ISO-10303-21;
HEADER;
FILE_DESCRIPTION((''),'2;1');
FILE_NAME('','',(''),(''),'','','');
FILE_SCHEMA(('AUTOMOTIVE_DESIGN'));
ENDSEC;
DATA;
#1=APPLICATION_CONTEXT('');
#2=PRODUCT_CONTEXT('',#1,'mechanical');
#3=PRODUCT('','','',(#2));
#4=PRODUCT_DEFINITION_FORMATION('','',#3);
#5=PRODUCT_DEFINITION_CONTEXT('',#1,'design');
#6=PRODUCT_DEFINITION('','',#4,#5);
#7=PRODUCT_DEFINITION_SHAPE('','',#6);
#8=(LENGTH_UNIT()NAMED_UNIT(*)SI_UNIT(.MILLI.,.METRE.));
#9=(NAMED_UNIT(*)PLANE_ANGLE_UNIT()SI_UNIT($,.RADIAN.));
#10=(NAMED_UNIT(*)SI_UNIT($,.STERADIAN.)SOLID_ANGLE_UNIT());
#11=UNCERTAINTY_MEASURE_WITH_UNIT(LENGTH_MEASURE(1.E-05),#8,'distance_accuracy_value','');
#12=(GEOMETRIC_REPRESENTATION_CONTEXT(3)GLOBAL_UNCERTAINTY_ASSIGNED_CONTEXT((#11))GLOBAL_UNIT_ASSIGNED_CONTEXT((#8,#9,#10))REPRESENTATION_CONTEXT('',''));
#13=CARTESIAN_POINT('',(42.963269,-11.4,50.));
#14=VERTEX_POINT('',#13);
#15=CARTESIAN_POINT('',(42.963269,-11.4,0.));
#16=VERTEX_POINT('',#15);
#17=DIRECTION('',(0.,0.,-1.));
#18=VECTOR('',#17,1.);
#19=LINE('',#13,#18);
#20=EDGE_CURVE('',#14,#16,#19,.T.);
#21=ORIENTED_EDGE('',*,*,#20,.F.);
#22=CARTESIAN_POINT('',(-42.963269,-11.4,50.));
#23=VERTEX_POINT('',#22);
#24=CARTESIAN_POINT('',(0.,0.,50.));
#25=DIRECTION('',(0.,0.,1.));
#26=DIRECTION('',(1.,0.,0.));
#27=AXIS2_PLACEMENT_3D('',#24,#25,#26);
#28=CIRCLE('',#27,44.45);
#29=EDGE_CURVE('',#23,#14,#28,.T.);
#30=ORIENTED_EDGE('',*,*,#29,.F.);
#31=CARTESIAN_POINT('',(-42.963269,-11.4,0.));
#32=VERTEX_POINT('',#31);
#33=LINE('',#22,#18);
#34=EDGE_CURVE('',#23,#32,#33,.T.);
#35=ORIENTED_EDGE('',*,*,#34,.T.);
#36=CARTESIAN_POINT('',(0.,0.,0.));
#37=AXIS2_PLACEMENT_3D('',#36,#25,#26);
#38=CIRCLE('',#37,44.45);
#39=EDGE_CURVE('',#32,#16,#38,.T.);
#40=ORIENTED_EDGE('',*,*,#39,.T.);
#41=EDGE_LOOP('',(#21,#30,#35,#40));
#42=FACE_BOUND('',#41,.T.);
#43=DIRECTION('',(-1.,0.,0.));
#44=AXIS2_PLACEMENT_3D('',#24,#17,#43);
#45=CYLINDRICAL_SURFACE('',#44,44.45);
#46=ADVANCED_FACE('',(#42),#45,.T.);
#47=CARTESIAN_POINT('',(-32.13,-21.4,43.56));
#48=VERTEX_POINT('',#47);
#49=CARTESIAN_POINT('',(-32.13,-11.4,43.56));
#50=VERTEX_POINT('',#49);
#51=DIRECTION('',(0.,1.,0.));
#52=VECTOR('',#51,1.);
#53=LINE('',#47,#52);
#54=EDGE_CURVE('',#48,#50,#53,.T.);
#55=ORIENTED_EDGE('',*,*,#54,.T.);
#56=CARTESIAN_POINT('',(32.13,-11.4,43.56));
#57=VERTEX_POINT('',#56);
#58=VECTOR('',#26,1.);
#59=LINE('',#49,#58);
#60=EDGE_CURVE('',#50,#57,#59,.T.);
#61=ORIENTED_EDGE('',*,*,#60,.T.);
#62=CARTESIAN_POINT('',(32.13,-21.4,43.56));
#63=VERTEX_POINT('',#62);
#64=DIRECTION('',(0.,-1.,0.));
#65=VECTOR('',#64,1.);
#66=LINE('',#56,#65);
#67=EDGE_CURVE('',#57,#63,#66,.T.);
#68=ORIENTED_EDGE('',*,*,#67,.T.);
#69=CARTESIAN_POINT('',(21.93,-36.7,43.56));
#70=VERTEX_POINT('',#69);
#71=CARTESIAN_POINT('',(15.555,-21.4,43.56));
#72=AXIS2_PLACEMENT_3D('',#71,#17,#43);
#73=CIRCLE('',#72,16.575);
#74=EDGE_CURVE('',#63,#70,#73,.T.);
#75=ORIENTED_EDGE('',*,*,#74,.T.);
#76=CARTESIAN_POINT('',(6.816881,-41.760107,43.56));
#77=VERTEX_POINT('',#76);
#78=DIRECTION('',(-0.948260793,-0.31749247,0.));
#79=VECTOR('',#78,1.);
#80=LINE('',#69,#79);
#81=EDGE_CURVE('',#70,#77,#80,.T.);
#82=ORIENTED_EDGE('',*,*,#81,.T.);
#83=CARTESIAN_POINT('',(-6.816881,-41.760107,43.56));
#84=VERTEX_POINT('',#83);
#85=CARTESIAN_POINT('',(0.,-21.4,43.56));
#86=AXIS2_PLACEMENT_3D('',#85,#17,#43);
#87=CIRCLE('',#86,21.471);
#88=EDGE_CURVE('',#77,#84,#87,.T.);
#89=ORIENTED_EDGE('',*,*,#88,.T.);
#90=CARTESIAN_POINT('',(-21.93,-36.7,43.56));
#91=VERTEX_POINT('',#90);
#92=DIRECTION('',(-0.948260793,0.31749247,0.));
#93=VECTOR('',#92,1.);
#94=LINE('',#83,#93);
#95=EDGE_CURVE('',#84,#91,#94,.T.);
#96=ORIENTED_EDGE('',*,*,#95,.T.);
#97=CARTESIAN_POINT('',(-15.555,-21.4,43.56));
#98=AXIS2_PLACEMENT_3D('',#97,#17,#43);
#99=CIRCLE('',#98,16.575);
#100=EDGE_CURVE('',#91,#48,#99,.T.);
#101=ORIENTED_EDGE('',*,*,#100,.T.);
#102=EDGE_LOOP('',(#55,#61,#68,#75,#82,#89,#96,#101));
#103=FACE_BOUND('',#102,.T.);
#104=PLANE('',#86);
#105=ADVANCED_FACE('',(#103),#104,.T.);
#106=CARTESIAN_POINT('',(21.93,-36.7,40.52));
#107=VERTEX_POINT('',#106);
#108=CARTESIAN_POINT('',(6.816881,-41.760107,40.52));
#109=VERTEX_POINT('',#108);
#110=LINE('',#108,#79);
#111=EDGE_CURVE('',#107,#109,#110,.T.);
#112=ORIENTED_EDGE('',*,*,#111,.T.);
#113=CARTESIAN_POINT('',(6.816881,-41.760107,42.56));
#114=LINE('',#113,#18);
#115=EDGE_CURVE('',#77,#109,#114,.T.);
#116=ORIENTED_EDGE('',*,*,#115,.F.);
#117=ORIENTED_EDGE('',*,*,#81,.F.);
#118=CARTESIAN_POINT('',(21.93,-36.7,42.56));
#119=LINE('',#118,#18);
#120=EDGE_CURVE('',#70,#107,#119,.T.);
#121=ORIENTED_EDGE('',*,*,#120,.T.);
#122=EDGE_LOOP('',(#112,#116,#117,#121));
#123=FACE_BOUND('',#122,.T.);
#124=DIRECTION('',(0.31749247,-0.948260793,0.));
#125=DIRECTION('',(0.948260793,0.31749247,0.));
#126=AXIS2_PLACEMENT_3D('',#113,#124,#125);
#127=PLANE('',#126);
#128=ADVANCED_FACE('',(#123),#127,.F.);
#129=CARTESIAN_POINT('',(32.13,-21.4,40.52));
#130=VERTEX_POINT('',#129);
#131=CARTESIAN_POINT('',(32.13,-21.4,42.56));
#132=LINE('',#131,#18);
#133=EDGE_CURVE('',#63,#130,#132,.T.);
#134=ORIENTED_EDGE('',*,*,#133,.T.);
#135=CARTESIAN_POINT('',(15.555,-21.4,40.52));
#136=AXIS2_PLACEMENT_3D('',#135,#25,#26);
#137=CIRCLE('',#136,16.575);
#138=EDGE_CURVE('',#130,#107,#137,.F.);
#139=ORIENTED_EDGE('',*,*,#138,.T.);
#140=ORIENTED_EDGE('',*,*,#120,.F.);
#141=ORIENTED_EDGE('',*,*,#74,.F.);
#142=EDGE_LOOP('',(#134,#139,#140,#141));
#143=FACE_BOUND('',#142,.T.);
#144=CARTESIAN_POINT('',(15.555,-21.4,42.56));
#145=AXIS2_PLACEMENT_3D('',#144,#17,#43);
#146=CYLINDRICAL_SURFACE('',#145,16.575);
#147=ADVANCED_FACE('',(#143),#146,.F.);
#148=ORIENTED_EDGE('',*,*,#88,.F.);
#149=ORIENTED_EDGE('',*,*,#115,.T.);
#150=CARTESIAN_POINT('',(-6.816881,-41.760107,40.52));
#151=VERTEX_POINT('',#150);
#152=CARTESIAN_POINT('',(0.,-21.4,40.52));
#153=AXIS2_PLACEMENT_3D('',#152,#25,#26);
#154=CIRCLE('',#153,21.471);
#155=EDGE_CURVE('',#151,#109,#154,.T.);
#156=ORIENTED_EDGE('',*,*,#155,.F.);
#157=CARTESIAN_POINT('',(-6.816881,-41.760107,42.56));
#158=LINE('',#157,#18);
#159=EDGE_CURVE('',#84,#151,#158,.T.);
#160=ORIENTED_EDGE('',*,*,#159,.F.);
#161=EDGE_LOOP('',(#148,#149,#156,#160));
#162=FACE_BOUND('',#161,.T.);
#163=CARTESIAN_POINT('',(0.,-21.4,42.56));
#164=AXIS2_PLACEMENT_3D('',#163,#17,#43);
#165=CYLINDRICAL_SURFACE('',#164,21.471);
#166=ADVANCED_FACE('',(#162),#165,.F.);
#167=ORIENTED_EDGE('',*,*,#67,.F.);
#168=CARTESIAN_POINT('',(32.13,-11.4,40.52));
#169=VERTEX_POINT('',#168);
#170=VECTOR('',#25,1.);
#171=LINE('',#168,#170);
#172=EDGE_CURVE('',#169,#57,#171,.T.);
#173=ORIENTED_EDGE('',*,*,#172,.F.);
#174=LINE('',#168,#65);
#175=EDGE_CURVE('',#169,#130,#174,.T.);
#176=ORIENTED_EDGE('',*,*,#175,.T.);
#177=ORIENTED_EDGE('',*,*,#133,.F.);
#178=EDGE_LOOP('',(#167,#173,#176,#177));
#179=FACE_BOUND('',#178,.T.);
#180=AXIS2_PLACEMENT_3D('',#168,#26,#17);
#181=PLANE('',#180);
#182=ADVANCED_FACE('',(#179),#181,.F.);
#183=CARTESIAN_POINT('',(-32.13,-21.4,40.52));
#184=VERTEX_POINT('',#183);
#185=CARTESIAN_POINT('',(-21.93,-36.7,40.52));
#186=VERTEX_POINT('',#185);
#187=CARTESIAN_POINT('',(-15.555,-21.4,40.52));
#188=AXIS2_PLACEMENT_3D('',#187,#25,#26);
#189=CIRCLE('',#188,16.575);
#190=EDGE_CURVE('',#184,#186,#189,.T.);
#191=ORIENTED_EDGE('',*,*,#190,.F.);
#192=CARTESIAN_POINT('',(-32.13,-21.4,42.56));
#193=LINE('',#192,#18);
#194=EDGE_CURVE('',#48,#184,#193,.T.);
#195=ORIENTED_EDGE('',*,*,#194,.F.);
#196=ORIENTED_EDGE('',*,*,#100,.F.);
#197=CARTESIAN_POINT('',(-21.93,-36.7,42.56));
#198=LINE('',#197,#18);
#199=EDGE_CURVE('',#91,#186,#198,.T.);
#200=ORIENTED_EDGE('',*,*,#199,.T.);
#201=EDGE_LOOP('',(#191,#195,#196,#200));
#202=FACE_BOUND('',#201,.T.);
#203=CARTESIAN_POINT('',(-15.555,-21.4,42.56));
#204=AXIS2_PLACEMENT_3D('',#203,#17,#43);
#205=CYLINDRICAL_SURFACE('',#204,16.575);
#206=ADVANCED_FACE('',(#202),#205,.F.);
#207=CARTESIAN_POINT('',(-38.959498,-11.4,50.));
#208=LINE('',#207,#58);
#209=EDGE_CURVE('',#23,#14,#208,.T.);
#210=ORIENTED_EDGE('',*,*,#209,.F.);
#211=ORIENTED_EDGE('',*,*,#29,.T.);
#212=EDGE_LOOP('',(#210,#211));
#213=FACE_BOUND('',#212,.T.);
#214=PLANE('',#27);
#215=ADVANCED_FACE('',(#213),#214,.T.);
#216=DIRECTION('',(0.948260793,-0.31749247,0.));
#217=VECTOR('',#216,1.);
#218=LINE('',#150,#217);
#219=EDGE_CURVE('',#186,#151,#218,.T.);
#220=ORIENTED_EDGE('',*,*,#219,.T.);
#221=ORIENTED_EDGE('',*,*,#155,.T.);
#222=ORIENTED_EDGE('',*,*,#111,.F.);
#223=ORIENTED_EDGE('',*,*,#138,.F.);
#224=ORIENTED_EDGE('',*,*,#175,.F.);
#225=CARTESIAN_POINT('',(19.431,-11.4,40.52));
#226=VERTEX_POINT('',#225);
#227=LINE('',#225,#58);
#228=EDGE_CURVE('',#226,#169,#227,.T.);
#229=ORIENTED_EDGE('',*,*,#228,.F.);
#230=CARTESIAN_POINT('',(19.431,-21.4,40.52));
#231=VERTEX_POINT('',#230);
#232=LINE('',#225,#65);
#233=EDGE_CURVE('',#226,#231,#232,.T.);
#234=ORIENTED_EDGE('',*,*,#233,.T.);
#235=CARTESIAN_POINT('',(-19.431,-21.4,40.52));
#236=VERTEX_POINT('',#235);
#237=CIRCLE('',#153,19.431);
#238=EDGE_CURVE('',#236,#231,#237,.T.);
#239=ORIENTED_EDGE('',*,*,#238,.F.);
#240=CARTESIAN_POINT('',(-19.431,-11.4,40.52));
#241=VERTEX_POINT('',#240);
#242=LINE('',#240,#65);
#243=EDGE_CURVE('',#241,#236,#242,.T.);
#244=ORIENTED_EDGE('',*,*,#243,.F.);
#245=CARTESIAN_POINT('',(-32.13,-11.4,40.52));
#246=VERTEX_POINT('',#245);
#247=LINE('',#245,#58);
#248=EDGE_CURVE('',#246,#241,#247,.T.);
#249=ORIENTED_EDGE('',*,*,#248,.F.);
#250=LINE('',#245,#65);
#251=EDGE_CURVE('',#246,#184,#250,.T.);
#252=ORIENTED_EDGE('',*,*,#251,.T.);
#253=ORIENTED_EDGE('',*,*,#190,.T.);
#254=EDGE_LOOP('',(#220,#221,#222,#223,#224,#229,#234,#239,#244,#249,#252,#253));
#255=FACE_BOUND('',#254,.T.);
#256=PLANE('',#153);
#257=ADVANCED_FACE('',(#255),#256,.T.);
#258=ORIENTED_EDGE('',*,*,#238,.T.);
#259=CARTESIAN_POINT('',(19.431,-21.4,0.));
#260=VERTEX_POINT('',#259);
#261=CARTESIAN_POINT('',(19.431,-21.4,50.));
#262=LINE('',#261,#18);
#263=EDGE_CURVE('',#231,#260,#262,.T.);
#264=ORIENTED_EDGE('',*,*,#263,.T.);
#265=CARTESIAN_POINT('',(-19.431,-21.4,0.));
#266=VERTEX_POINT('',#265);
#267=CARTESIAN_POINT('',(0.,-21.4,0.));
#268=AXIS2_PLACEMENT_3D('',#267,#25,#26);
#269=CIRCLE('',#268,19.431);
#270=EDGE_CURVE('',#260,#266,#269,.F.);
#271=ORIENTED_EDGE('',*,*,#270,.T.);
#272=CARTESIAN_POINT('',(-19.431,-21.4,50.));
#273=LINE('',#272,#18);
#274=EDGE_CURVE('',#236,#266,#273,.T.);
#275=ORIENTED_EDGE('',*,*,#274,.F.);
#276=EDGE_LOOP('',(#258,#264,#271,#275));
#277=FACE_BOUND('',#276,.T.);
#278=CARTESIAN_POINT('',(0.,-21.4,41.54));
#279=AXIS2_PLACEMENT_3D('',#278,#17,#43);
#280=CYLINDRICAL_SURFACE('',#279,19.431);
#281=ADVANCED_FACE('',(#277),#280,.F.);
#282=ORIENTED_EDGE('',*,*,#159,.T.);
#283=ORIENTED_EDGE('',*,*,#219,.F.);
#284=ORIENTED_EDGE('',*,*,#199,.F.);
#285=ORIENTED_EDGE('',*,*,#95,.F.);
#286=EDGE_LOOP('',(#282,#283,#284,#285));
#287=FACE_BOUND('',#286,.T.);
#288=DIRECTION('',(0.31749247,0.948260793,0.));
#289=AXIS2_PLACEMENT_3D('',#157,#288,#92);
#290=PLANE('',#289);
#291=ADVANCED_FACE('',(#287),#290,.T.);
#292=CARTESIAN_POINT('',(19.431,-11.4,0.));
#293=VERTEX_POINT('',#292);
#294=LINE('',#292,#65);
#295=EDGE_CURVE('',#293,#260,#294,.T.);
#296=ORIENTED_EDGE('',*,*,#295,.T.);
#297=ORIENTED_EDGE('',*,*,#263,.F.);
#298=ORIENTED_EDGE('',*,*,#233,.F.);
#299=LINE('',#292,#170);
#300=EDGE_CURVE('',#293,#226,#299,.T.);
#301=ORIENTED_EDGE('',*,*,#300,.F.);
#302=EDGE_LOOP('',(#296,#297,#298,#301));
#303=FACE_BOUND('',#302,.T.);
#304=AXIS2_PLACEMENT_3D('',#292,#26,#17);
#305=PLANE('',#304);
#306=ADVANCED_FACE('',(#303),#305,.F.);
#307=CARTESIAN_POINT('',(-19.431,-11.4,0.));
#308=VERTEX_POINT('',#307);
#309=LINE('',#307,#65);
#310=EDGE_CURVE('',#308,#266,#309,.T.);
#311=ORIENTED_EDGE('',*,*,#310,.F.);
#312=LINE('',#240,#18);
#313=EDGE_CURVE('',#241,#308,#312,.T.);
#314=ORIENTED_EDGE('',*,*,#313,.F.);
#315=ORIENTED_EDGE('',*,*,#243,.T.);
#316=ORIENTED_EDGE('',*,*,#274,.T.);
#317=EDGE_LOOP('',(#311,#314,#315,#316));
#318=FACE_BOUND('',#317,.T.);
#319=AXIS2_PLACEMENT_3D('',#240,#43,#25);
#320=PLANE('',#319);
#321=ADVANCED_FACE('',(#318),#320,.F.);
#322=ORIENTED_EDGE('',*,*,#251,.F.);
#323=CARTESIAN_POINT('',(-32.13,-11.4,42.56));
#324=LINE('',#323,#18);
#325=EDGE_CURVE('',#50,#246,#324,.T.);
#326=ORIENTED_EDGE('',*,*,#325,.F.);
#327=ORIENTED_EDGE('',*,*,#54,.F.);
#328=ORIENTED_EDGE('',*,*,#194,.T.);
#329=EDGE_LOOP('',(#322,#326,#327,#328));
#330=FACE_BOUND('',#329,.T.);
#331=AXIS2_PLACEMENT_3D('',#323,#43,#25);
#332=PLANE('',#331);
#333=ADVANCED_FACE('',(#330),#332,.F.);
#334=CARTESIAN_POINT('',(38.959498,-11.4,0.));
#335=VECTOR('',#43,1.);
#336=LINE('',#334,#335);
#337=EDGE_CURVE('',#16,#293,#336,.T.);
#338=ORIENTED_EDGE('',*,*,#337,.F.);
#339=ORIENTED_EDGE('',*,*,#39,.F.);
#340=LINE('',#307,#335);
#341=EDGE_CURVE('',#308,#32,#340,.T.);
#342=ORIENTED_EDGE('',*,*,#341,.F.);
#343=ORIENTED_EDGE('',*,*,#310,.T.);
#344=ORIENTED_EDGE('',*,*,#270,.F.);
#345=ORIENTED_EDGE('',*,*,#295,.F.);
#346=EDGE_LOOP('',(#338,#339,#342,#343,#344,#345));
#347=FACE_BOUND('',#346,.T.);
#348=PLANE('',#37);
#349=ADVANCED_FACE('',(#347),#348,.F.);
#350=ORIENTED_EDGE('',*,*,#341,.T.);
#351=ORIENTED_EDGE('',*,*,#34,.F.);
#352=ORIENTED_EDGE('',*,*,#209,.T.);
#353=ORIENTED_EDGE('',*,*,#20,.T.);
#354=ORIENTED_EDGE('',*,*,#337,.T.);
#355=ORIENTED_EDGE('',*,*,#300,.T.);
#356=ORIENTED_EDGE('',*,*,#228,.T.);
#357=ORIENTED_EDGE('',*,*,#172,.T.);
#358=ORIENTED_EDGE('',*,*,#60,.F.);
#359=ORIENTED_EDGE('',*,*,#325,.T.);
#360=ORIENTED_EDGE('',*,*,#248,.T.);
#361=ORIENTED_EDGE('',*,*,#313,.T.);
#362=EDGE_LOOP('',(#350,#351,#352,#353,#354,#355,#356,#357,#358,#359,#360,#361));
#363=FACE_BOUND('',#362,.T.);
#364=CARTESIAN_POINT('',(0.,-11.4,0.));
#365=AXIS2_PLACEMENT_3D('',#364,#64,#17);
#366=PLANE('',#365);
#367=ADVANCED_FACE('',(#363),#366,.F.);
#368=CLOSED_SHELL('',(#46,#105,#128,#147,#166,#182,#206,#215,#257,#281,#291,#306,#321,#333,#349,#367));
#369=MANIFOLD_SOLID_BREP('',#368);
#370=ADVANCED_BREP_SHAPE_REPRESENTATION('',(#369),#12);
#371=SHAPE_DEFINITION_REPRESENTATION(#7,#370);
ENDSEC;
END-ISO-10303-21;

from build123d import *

# Parameters (mm, degrees)
BOSS_EXTRUDE1_DEPTH = 50
CAVITY1_DEPTH       = 42.56
CAVITY1_START       = 40.52
CAVITY1_2_DEPTH     = 2.04
CAVITY1_START_2     = 41.54
CAVITY1_3_DEPTH     = 1.02
CUT_EXTRUDE1_START  = -42.56
CUT_EXTRUDE1_DEPTH  = 42.56
CUT_EXTRUDE2_DEPTH  = 80.011407404
BOSS_EXTRUDE2_DEPTH = 10
CUT_EXTRUDE3_DEPTH  = 1
SKETCH7_W           = 6.44
SKETCH7_H           = 10
BOSS_EXTRUDE3_DEPTH = 38.862
BOSS_EXTRUDE4_DEPTH = 50


# Read off the part's stored shape, not the designer's step: Cavity1
with BuildPart() as part:
    # Sketch1 → Boss-Extrude1 (new body)
    with BuildSketch(Plane.XY):
        with BuildLine():
            Line((42.035699114, -14.45), (-42.035699114, -14.45))
            ThreePointArc((-42.035699114, -14.45), (0, -44.45), (42.035699114, -14.45))
        make_face()
    extrude(amount=BOSS_EXTRUDE1_DEPTH)

    # Cavity1 outline → Cavity1 (cut)
    with BuildSketch(Plane.XY):
        with BuildLine():
            ThreePointArc((-18.145557611, -14.45), (0, -40.831), (18.145557611, -14.45))
            Line((18.145557611, -14.45), (13.723350293, -14.45))
            ThreePointArc((13.723350293, -14.45), (0, -36.782875), (-13.723350293, -14.45))
            Line((-13.723350293, -14.45), (-18.145557611, -14.45))
        make_face()
    extrude(amount=CAVITY1_DEPTH, mode=Mode.SUBTRACT)

    # Cavity1 2 outline → Cavity1 2 (cut)
    with BuildSketch(Plane.XY.offset(CAVITY1_START)):
        with BuildLine():
            Line((30.602528867, -14.45), (18.145557611, -14.45))
            ThreePointArc((18.145557611, -14.45), (0, -40.831), (-18.145557611, -14.45))
            Line((-18.145557611, -14.45), (-30.602528867, -14.45))
            ThreePointArc((-30.602528867, -14.45), (-30.998341956, -27.419452985), (-21.93, -36.7))
            Line((-21.93, -36.7), (-6.816880824, -41.760107486))
            ThreePointArc((-6.816880824, -41.760107486), (0, -42.871), (6.816880824, -41.760107486))
            Line((6.816880824, -41.760107486), (21.93, -36.7))
            ThreePointArc((21.93, -36.7), (30.998341956, -27.419452985), (30.602528867, -14.45))
        make_face()
    extrude(amount=CAVITY1_2_DEPTH, mode=Mode.SUBTRACT)

    # Cavity1 3 outline → Cavity1 3 (cut)
    with BuildSketch(Plane.XY.offset(CAVITY1_START_2)):
        with BuildLine():
            ThreePointArc((-13.723350293, -14.45), (0, -36.782875), (13.723350293, -14.45))
            Line((13.723350293, -14.45), (7.578589464, -14.45))
            ThreePointArc((7.578589464, -14.45), (0, -31.682875), (-7.578589464, -14.45))
            Line((-7.578589464, -14.45), (-13.723350293, -14.45))
        make_face()
    extrude(amount=CAVITY1_3_DEPTH, mode=Mode.SUBTRACT)

    # Sketch2 → Cut-Extrude1 (cut)
    with BuildSketch(Plane(origin=(0, 0, 0), x_dir=(-1, 0, 0), z_dir=(0, 0, -1)).offset(CUT_EXTRUDE1_START)):
        with BuildLine():
            Line((13.723350293, -14.45), (-13.723350293, -14.45))
            ThreePointArc((-13.723350293, -14.45), (0, -36.782875), (13.723350293, -14.45))
        make_face()
    extrude(amount=CUT_EXTRUDE1_DEPTH, mode=Mode.SUBTRACT)

    # Sketch4 → Cut-Extrude2 (cut, through all)
    with BuildSketch(Plane(origin=(0, 0, 0), x_dir=(-1, 0, 0), z_dir=(0, 0, -1))):
        with BuildLine():
            ThreePointArc((-42.035699114, -14.45), (-40.646415857, -17.990869296), (-38.9594982, -21.4))
            Line((-38.9594982, -21.4), (-19.431, -21.4))
            ThreePointArc((-19.431, -21.4), (-19.106937103, -17.866062319), (-18.145557611, -14.45))
            Line((-18.145557611, -14.45), (-42.035699114, -14.45))
        make_face()
        with BuildLine():
            Line((19.431, -21.4), (38.9594982, -21.4))
            ThreePointArc((38.9594982, -21.4), (40.646415857, -17.990869296), (42.035699114, -14.45))
            Line((42.035699114, -14.45), (18.145557611, -14.45))
            ThreePointArc((18.145557611, -14.45), (19.106937103, -17.866062319), (19.431, -21.4))
        make_face()
    extrude(amount=-CUT_EXTRUDE2_DEPTH, mode=Mode.SUBTRACT)

    # Sketch5 → Boss-Extrude2 (add)
    with BuildSketch(Plane(origin=(0, -21.4, 0), x_dir=(1, 0, 0), z_dir=(0, 1, 0))):
        Polygon((-32.13, -42.56), (-32.13, -40.52), (-19.431, -40.52), (-19.431, 0), (-38.9594982, 0), (-38.9594982, -50), (-19.431, -50), (-19.431, -42.56), align=None)
        Polygon((19.431, -42.56), (19.431, -50), (38.9594982, -50), (38.9594982, 0), (19.431, 0), (19.431, -40.52), (32.13, -40.52), (32.13, -42.56), align=None)
    extrude(amount=BOSS_EXTRUDE2_DEPTH)

    # Sketch6 → Cut-Extrude3 (cut)
    with BuildSketch(Plane(origin=(0, 0, 42.56), x_dir=(-1, 0, 0), z_dir=(0, 0, -1))):
        with BuildLine():
            Line((-19.431, -21.4), (-19.431, -11.4))
            Line((-19.431, -11.4), (-32.13, -11.4))
            Line((-32.13, -11.4), (-32.13, -21.4))
            ThreePointArc((-32.13, -21.4), (-29.346233629, -30.594155752), (-21.93, -36.7))
            Line((-21.93, -36.7), (-6.816880824, -41.760107486))
            ThreePointArc((-6.816880824, -41.760107486), (0, -42.871), (6.816880824, -41.760107486))
            Line((6.816880824, -41.760107486), (21.93, -36.7))
            ThreePointArc((21.93, -36.7), (29.346233629, -30.594155752), (32.13, -21.4))
            Line((32.13, -21.4), (32.13, -11.4))
            Line((32.13, -11.4), (19.431, -11.4))
            Line((19.431, -11.4), (19.431, -21.4))
            ThreePointArc((19.431, -21.4), (19.106937103, -17.866062319), (18.145557611, -14.45))
            Line((18.145557611, -14.45), (-18.145557611, -14.45))
            ThreePointArc((-18.145557611, -14.45), (-19.106937103, -17.866062319), (-19.431, -21.4))
        make_face()
    extrude(amount=-CUT_EXTRUDE3_DEPTH, mode=Mode.SUBTRACT)

    # Sketch7 → Boss-Extrude3 (add)
    with BuildSketch(Plane.ZY.offset(-19.431)):
        with Locations((46.78, -16.4)):
            Rectangle(SKETCH7_W, SKETCH7_H)
    extrude(amount=BOSS_EXTRUDE3_DEPTH)

    # Sketch8 → Boss-Extrude4 (add, through all)
    with BuildSketch(Plane(origin=(0, 0, 0), x_dir=(-1, 0, 0), z_dir=(0, 0, -1))):
        with BuildLine():
            Line((-38.9594982, -21.4), (-38.9594982, -11.4))
            Line((-38.9594982, -11.4), (-42.963269196, -11.4))
            ThreePointArc((-42.963269196, -11.4), (-41.265420808, -16.521729496), (-38.9594982, -21.4))
        make_face()
        with BuildLine():
            Line((38.9594982, -11.4), (42.963269196, -11.4))
            ThreePointArc((42.963269196, -11.4), (41.265420808, -16.521729496), (38.9594982, -21.4))
            Line((38.9594982, -21.4), (38.9594982, -11.4))
        make_face()
    extrude(amount=-BOSS_EXTRUDE4_DEPTH)


solid = part.part
